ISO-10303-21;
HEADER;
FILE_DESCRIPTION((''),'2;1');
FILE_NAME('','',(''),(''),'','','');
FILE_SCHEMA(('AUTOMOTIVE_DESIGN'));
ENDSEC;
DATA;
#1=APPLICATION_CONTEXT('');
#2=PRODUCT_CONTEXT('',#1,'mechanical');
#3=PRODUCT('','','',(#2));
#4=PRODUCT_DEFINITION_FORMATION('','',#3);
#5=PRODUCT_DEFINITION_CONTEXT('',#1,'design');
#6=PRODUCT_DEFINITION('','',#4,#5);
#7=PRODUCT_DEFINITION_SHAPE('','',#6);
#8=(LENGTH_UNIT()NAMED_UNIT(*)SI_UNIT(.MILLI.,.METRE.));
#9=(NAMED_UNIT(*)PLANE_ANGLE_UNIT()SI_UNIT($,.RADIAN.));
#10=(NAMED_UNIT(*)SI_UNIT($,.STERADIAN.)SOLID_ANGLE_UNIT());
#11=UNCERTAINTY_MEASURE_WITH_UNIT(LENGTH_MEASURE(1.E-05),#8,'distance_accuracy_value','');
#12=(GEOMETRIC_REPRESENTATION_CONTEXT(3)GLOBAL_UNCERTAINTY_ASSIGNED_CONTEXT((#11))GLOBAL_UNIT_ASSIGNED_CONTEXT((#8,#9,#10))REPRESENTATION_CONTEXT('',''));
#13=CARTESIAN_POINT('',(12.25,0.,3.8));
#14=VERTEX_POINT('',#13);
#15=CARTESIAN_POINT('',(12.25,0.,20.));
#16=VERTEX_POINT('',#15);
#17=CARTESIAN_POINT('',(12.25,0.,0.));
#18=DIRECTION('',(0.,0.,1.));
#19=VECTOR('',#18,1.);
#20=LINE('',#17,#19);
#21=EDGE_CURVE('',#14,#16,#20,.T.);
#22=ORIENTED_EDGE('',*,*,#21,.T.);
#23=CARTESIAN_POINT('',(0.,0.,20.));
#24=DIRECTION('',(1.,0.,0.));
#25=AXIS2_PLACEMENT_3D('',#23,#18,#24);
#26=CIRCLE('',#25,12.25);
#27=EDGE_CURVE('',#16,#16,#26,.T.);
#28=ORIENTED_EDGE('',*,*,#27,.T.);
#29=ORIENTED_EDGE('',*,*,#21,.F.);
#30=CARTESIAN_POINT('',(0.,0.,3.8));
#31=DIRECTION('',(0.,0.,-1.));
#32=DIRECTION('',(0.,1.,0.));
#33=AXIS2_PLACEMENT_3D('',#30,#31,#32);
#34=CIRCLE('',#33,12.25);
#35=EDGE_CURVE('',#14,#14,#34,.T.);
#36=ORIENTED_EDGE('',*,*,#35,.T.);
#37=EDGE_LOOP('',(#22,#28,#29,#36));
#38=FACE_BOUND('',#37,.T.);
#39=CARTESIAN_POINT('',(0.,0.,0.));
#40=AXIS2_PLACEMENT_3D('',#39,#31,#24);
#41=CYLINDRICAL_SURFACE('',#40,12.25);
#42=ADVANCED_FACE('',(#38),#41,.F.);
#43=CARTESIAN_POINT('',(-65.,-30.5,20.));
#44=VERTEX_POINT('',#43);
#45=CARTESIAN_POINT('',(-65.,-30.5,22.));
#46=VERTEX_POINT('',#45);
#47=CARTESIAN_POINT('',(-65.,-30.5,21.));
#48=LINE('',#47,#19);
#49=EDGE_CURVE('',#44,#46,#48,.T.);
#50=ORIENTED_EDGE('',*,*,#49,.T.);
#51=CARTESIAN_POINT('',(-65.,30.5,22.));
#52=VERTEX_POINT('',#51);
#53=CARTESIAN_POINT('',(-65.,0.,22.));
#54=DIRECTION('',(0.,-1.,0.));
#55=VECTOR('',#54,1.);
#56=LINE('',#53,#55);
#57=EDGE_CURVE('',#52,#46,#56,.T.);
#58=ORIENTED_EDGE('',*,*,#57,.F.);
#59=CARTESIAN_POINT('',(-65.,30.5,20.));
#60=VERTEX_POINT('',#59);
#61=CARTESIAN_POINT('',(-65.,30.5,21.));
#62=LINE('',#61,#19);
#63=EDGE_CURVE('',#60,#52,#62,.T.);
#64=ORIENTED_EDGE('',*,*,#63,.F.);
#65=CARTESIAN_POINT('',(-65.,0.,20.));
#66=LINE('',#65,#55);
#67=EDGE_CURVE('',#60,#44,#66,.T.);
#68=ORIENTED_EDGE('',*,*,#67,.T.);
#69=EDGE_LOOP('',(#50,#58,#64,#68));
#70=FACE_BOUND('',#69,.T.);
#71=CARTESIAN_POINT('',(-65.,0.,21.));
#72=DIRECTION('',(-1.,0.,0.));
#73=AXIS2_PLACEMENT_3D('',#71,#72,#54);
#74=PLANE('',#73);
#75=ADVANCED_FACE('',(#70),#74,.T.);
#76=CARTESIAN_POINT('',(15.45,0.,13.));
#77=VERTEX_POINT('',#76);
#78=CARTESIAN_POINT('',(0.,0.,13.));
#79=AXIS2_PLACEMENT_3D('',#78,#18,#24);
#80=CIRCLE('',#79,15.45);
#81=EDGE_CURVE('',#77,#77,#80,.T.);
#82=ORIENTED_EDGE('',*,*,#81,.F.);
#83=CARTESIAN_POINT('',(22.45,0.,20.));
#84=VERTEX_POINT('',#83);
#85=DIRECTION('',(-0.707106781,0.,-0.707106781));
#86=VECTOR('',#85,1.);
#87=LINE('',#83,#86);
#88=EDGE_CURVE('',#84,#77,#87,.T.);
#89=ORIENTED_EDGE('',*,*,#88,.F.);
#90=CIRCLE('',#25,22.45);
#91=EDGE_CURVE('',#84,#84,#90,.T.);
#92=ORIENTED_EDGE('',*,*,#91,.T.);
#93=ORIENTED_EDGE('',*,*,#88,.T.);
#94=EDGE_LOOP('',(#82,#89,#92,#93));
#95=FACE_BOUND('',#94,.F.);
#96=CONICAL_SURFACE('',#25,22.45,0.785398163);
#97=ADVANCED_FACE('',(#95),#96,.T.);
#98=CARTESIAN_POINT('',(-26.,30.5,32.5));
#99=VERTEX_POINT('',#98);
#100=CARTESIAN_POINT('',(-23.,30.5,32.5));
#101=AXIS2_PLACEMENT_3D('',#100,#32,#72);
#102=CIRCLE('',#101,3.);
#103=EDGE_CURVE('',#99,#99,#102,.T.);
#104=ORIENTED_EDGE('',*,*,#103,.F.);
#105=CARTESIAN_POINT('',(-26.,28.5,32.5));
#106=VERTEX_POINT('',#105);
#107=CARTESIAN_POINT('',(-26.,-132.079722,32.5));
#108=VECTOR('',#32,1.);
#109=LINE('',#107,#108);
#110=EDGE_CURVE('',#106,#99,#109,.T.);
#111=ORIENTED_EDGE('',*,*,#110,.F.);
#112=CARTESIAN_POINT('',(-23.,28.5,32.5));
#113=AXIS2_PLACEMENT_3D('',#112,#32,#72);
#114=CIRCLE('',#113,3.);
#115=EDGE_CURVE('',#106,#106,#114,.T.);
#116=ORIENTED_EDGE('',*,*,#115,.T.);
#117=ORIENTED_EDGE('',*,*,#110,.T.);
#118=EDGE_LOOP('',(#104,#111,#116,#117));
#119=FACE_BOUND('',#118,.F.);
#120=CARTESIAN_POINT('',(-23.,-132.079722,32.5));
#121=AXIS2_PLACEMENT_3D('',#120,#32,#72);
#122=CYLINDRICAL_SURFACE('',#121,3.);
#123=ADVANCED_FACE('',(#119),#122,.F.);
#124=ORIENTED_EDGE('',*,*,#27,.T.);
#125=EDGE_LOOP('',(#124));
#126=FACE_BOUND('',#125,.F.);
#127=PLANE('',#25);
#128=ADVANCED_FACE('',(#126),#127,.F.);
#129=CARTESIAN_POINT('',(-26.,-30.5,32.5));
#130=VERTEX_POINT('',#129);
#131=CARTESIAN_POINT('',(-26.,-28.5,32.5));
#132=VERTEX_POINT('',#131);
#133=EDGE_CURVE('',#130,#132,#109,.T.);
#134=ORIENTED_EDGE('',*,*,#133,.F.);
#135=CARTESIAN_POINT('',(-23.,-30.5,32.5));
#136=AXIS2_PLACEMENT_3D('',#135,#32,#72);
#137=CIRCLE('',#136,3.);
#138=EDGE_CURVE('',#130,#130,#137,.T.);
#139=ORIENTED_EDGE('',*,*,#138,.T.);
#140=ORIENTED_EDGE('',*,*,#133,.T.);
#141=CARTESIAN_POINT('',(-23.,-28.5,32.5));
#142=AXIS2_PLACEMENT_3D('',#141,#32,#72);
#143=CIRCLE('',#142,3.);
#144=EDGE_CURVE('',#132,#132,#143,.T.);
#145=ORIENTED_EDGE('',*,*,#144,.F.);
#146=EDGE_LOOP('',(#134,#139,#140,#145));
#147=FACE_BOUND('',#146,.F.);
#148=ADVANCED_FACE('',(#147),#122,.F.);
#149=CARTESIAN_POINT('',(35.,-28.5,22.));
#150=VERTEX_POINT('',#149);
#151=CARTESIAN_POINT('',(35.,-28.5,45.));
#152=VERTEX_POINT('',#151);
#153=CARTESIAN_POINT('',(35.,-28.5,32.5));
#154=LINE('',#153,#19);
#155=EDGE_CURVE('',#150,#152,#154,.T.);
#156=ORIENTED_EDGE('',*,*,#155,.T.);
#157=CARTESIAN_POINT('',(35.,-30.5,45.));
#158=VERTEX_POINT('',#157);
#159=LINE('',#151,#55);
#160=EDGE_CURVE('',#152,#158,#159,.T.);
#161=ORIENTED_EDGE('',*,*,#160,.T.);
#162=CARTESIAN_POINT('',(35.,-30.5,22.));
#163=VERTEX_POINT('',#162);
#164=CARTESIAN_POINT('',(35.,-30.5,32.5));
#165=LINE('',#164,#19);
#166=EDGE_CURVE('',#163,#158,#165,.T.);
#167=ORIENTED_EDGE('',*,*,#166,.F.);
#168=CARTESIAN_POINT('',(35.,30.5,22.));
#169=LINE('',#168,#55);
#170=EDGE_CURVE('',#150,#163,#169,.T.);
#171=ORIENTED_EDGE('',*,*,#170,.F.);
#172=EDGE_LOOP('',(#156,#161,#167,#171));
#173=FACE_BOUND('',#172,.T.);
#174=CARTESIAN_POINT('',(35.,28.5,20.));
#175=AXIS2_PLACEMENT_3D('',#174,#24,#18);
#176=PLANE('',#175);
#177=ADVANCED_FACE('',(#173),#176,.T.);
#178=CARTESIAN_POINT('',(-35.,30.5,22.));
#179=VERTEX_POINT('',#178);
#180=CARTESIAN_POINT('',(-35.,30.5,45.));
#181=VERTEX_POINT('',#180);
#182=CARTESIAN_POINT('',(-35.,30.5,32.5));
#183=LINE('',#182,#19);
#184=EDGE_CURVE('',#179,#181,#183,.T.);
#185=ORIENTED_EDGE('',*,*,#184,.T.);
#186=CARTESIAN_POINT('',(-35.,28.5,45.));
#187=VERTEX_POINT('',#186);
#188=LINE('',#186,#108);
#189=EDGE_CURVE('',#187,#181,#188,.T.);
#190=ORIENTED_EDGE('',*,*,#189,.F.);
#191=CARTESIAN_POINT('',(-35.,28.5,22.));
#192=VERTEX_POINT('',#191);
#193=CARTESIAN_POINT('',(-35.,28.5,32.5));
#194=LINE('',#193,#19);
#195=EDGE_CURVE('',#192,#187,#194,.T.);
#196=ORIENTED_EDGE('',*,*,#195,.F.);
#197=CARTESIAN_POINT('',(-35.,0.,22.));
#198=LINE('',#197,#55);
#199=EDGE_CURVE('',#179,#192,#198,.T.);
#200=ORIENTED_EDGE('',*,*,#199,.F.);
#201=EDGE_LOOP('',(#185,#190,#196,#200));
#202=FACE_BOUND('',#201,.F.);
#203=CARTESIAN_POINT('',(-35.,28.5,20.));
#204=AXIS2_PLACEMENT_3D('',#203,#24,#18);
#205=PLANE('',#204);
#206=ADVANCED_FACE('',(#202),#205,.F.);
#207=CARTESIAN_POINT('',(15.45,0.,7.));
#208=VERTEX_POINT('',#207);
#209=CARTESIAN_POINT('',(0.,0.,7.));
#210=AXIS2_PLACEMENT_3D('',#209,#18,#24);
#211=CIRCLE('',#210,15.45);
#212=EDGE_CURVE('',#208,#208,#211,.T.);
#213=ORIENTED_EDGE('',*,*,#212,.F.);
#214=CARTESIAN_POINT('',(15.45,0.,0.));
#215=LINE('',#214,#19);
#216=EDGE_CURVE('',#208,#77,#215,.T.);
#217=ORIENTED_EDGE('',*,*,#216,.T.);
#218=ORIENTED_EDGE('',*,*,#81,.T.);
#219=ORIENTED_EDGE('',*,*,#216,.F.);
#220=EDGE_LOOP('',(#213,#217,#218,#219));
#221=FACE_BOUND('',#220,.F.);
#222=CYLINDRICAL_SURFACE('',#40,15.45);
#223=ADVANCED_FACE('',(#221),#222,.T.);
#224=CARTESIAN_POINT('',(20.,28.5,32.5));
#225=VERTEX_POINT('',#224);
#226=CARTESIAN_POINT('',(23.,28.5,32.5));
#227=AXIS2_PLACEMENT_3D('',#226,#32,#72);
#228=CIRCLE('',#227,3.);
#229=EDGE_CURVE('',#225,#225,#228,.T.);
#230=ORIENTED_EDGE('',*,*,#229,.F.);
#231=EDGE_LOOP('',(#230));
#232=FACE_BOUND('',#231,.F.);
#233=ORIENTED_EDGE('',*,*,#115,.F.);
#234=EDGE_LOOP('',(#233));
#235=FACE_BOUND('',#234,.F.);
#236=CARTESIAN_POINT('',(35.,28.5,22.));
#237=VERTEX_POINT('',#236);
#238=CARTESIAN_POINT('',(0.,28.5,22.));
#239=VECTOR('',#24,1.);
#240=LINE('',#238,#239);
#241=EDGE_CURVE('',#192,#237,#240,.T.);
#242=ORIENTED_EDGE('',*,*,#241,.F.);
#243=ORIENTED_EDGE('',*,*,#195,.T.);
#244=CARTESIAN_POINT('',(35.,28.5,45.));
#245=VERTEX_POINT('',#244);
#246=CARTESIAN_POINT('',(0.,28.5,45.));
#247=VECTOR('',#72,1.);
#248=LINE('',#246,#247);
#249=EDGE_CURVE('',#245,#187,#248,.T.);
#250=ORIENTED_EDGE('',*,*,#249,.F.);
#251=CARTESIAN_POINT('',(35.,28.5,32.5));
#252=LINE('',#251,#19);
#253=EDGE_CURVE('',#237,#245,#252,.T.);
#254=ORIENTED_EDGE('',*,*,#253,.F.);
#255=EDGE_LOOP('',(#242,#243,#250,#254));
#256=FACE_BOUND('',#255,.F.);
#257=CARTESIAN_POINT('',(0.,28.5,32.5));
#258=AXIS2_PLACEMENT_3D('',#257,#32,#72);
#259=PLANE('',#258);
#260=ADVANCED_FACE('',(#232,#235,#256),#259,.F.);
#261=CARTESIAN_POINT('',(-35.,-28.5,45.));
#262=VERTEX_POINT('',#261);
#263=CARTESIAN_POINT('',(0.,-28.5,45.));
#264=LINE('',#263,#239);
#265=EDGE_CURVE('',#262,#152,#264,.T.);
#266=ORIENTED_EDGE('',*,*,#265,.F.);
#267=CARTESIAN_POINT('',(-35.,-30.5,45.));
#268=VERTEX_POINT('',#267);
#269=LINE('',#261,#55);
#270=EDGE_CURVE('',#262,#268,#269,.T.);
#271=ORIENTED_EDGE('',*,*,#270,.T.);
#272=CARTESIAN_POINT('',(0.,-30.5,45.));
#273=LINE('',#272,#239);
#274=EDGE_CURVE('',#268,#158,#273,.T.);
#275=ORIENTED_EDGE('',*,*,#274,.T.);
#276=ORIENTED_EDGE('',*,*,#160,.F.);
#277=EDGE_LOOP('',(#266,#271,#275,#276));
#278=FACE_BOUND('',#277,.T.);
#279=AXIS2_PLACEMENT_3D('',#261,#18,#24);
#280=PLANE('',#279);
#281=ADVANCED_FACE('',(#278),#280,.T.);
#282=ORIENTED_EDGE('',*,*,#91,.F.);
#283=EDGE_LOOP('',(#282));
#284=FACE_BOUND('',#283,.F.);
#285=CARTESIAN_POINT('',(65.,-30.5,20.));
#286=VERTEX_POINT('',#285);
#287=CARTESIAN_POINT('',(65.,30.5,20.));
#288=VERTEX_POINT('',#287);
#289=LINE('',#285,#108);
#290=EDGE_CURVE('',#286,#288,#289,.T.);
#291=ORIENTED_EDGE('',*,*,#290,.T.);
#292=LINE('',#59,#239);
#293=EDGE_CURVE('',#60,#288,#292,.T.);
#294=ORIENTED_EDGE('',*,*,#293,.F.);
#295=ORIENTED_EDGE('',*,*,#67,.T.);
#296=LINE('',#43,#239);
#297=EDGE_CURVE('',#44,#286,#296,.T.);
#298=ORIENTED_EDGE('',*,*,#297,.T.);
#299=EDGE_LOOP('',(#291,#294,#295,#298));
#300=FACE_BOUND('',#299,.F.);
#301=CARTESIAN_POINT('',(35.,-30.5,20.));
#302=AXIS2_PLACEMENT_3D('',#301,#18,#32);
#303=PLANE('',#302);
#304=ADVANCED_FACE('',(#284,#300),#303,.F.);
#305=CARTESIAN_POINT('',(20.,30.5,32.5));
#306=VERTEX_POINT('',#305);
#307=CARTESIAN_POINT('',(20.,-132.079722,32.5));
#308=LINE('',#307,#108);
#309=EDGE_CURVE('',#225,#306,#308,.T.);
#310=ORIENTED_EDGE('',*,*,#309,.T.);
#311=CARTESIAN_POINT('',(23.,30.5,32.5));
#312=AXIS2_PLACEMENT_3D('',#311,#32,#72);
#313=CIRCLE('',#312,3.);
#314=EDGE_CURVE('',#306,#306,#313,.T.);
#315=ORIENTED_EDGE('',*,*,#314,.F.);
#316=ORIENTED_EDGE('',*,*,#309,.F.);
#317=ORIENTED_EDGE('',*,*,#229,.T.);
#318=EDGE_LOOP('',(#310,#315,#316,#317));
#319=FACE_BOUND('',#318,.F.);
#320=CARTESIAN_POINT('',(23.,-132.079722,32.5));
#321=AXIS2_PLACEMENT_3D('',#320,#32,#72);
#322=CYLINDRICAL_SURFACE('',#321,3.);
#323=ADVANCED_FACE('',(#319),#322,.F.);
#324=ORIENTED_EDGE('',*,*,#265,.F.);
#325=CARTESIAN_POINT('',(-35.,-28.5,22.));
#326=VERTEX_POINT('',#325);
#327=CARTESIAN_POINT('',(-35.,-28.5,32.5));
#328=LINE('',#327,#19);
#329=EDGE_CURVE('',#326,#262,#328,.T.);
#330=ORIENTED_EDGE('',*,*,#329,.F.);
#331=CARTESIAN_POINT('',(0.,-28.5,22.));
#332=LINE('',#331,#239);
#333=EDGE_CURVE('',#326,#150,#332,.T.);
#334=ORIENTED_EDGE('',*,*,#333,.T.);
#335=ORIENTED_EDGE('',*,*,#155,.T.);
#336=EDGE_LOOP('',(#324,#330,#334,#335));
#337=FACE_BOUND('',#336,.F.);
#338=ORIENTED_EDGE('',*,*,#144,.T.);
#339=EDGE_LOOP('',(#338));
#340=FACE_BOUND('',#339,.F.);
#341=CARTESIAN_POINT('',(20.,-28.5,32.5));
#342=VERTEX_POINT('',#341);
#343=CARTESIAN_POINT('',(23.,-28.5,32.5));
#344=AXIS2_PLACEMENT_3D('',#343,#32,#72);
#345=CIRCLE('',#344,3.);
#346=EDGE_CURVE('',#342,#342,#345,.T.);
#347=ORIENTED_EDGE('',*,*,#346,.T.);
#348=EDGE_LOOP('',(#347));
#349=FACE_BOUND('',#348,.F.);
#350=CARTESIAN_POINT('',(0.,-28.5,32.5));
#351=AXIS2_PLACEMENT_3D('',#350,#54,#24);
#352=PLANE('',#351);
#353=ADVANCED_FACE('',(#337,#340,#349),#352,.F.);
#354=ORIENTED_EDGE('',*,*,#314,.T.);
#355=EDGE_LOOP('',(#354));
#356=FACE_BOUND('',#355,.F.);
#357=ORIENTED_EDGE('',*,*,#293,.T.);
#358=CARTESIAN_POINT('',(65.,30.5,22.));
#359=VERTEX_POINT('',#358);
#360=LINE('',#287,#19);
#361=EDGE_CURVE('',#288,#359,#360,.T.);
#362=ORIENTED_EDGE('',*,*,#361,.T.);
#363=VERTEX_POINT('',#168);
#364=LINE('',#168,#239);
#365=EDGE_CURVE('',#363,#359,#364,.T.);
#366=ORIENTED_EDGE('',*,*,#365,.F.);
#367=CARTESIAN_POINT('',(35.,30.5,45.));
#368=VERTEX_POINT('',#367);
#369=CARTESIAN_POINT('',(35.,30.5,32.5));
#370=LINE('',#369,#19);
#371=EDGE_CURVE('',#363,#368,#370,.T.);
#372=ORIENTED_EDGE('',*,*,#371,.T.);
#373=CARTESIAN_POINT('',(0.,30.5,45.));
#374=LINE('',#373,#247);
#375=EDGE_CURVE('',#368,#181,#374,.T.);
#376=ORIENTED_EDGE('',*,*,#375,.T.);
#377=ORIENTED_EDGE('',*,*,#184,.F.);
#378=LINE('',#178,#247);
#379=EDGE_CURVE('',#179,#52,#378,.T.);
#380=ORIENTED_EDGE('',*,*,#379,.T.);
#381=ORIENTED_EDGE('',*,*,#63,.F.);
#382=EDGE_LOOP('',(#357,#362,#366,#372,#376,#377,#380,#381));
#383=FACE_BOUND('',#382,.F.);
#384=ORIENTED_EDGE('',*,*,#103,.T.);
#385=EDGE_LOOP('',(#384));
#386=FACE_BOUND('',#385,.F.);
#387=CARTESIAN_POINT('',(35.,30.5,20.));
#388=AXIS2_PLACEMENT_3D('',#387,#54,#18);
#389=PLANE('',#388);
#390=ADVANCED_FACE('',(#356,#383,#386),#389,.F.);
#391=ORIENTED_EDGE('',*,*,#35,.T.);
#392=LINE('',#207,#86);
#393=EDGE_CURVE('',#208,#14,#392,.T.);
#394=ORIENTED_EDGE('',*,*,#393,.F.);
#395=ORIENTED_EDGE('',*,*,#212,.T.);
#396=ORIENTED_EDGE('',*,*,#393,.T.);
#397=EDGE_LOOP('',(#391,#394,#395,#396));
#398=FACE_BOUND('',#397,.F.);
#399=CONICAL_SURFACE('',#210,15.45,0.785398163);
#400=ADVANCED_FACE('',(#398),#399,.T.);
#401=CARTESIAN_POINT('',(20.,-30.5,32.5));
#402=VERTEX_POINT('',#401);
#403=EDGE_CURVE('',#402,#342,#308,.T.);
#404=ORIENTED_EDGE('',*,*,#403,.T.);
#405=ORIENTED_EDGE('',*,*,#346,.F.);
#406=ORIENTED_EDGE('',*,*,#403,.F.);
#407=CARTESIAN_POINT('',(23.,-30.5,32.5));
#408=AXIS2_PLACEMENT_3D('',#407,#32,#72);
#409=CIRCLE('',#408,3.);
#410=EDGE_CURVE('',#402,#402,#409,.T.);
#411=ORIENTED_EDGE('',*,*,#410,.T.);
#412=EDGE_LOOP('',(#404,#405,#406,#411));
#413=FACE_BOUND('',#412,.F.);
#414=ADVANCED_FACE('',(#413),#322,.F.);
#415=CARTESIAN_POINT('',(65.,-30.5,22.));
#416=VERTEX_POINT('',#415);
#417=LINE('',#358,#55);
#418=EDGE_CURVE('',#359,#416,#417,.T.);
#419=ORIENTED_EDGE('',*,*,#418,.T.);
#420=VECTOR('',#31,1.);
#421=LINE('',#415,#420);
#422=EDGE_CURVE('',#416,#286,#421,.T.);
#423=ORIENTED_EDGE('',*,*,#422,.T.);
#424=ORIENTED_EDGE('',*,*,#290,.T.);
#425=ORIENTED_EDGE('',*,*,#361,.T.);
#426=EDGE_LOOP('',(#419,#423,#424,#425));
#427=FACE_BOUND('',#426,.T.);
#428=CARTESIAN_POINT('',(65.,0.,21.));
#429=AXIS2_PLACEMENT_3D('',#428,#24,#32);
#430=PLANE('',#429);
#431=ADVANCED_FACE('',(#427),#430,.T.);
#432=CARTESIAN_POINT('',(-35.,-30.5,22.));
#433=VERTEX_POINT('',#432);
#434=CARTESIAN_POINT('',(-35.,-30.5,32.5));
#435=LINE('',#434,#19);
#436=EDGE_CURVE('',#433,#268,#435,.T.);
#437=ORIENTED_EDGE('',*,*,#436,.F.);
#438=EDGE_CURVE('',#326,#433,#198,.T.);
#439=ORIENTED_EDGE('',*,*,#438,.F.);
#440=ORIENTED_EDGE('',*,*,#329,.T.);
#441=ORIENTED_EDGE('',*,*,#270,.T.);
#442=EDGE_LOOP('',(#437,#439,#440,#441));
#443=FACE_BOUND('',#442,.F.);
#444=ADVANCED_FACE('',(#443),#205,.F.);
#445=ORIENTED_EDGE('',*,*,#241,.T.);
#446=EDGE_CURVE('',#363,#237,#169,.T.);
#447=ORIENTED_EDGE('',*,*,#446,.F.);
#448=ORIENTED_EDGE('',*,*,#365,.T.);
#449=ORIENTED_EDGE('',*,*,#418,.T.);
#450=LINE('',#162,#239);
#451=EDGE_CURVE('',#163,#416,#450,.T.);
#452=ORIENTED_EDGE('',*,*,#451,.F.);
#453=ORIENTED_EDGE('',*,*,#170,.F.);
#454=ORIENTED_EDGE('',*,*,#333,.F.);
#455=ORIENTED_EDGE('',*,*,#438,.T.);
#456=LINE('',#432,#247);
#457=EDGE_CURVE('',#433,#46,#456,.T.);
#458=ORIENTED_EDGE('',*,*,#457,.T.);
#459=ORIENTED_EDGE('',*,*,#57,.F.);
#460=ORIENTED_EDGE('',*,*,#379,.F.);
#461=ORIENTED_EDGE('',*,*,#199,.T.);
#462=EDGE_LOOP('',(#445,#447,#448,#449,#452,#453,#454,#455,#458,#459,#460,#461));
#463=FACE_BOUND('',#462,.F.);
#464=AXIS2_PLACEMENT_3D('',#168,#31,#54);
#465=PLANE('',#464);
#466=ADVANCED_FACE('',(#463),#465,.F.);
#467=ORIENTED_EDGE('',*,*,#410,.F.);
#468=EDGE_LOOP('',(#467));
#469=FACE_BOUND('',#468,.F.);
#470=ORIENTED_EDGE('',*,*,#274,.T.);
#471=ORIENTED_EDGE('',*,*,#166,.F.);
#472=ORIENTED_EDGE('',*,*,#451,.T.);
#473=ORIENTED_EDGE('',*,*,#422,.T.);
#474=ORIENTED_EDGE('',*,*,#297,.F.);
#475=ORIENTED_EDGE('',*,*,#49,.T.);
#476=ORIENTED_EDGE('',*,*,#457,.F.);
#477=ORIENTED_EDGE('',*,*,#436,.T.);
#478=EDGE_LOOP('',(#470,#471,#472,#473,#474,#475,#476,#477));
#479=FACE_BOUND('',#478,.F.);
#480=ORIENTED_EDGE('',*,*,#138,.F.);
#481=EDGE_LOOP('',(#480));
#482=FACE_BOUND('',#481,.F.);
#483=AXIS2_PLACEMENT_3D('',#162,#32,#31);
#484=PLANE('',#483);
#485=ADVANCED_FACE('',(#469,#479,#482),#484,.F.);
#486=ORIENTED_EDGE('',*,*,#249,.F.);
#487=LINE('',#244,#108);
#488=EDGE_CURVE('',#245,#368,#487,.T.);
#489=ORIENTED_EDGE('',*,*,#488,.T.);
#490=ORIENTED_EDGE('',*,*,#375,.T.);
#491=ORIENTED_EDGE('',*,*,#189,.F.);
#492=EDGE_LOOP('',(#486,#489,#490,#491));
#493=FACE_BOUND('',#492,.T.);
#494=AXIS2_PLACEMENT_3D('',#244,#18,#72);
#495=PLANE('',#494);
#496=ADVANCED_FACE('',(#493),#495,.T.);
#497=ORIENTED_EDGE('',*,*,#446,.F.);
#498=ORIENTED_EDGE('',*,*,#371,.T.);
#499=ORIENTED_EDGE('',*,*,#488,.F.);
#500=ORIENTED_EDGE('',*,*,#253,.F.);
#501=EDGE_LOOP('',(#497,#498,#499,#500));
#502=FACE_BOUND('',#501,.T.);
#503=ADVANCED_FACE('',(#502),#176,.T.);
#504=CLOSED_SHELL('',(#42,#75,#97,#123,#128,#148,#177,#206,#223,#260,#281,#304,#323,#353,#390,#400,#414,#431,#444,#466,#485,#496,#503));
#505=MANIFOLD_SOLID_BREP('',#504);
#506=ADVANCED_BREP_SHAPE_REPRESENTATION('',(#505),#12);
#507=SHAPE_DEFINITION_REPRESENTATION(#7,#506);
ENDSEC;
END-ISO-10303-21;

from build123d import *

# Parameters (mm, degrees)
F0_R      = 15.45
F0_R_2    = 12.25
F1_DEPTH  = 20
F2_W      = 70
F2_H      = 57
F3_DEPTH  = 2
F4_W      = 70
F4_H      = 25
F5_DEPTH  = 2
F6_W      = 70
F6_H      = 25
F7_DEPTH  = 2
F10_D     = 6
F11_W     = 61
F11_H     = 2
F12_DEPTH = 30
F14_DEPTH = 30


# Not quite as in the source:
# - a fillet or chamfer that OpenCascade refuses, or shapes differently, is made with other operations: its cross-section is extruded or revolved along the edge and cut away or added


with BuildPart() as f1:
    # F0 (on Top) → F1 (new body)
    with BuildSketch(Plane.XY):
        Circle(F0_R)
        Circle(F0_R_2, mode=Mode.SUBTRACT)
    extrude(amount=F1_DEPTH)

    # F2 (on face) → F3 (join)
    with BuildSketch(Plane.XY.offset(20)):
        Rectangle(F2_W, F2_H)
    extrude(amount=F3_DEPTH)

    # F4 (on face) → F5 (join)
    with BuildSketch(Plane.XZ.offset(28.5)):
        with Locations((0, 32.5)):
            Rectangle(F4_W, F4_H)
    extrude(amount=F5_DEPTH)

    # F6 (on face) → F7 (join)
    with BuildSketch(Plane(origin=(0, 28.5, 0), x_dir=(-1, 0, 0), z_dir=(0, 1, 0))):
        with Locations((0, 32.5)):
            Rectangle(F6_W, F6_H)
    extrude(amount=F7_DEPTH)

    # F8: chamfer of 7 on 3 edges, made by hand

    # F8_s1 → F8_t2 (revolve)
    with BuildSketch(Plane.XZ):
        Polygon((22.45, 20), (15.45, 13), (15.45, 20), align=None)
    revolve(axis=Axis((0, 0, 20), (0, 0, 1)))

    # F8_s3 → F8_t4 (revolve, cut)
    with BuildSketch(Plane.XZ):
        Polygon((15.45, 7), (8.45, 0), (15.45, 0), align=None)
    revolve(axis=Axis((0, 0, 0), (0, 0, 1)), mode=Mode.SUBTRACT)

    # F10 (through all)
    with Locations(Plane.XZ.offset(30.5)):
        with Locations((-23, 32.5), (23, 32.5)):
            Hole(F10_D / 2)

    # F11 (on face) → F12 (join)
    with BuildSketch(Plane(origin=(-35, 0, 0), x_dir=(0, -1, 0), z_dir=(-1, 0, 0))):
        with Locations((0, 21)):
            Rectangle(F11_W, F11_H)
    extrude(amount=F12_DEPTH)

    # F13 (on face) → F14 (join)
    with BuildSketch(Plane.YZ.offset(35)):
        Polygon((-30.5, 22), (-30.5, 20), (30.5, 20), (30.5, 22), (28.5, 22), (-28.5, 22), align=None)
    extrude(amount=F14_DEPTH)


solid = f1.part
